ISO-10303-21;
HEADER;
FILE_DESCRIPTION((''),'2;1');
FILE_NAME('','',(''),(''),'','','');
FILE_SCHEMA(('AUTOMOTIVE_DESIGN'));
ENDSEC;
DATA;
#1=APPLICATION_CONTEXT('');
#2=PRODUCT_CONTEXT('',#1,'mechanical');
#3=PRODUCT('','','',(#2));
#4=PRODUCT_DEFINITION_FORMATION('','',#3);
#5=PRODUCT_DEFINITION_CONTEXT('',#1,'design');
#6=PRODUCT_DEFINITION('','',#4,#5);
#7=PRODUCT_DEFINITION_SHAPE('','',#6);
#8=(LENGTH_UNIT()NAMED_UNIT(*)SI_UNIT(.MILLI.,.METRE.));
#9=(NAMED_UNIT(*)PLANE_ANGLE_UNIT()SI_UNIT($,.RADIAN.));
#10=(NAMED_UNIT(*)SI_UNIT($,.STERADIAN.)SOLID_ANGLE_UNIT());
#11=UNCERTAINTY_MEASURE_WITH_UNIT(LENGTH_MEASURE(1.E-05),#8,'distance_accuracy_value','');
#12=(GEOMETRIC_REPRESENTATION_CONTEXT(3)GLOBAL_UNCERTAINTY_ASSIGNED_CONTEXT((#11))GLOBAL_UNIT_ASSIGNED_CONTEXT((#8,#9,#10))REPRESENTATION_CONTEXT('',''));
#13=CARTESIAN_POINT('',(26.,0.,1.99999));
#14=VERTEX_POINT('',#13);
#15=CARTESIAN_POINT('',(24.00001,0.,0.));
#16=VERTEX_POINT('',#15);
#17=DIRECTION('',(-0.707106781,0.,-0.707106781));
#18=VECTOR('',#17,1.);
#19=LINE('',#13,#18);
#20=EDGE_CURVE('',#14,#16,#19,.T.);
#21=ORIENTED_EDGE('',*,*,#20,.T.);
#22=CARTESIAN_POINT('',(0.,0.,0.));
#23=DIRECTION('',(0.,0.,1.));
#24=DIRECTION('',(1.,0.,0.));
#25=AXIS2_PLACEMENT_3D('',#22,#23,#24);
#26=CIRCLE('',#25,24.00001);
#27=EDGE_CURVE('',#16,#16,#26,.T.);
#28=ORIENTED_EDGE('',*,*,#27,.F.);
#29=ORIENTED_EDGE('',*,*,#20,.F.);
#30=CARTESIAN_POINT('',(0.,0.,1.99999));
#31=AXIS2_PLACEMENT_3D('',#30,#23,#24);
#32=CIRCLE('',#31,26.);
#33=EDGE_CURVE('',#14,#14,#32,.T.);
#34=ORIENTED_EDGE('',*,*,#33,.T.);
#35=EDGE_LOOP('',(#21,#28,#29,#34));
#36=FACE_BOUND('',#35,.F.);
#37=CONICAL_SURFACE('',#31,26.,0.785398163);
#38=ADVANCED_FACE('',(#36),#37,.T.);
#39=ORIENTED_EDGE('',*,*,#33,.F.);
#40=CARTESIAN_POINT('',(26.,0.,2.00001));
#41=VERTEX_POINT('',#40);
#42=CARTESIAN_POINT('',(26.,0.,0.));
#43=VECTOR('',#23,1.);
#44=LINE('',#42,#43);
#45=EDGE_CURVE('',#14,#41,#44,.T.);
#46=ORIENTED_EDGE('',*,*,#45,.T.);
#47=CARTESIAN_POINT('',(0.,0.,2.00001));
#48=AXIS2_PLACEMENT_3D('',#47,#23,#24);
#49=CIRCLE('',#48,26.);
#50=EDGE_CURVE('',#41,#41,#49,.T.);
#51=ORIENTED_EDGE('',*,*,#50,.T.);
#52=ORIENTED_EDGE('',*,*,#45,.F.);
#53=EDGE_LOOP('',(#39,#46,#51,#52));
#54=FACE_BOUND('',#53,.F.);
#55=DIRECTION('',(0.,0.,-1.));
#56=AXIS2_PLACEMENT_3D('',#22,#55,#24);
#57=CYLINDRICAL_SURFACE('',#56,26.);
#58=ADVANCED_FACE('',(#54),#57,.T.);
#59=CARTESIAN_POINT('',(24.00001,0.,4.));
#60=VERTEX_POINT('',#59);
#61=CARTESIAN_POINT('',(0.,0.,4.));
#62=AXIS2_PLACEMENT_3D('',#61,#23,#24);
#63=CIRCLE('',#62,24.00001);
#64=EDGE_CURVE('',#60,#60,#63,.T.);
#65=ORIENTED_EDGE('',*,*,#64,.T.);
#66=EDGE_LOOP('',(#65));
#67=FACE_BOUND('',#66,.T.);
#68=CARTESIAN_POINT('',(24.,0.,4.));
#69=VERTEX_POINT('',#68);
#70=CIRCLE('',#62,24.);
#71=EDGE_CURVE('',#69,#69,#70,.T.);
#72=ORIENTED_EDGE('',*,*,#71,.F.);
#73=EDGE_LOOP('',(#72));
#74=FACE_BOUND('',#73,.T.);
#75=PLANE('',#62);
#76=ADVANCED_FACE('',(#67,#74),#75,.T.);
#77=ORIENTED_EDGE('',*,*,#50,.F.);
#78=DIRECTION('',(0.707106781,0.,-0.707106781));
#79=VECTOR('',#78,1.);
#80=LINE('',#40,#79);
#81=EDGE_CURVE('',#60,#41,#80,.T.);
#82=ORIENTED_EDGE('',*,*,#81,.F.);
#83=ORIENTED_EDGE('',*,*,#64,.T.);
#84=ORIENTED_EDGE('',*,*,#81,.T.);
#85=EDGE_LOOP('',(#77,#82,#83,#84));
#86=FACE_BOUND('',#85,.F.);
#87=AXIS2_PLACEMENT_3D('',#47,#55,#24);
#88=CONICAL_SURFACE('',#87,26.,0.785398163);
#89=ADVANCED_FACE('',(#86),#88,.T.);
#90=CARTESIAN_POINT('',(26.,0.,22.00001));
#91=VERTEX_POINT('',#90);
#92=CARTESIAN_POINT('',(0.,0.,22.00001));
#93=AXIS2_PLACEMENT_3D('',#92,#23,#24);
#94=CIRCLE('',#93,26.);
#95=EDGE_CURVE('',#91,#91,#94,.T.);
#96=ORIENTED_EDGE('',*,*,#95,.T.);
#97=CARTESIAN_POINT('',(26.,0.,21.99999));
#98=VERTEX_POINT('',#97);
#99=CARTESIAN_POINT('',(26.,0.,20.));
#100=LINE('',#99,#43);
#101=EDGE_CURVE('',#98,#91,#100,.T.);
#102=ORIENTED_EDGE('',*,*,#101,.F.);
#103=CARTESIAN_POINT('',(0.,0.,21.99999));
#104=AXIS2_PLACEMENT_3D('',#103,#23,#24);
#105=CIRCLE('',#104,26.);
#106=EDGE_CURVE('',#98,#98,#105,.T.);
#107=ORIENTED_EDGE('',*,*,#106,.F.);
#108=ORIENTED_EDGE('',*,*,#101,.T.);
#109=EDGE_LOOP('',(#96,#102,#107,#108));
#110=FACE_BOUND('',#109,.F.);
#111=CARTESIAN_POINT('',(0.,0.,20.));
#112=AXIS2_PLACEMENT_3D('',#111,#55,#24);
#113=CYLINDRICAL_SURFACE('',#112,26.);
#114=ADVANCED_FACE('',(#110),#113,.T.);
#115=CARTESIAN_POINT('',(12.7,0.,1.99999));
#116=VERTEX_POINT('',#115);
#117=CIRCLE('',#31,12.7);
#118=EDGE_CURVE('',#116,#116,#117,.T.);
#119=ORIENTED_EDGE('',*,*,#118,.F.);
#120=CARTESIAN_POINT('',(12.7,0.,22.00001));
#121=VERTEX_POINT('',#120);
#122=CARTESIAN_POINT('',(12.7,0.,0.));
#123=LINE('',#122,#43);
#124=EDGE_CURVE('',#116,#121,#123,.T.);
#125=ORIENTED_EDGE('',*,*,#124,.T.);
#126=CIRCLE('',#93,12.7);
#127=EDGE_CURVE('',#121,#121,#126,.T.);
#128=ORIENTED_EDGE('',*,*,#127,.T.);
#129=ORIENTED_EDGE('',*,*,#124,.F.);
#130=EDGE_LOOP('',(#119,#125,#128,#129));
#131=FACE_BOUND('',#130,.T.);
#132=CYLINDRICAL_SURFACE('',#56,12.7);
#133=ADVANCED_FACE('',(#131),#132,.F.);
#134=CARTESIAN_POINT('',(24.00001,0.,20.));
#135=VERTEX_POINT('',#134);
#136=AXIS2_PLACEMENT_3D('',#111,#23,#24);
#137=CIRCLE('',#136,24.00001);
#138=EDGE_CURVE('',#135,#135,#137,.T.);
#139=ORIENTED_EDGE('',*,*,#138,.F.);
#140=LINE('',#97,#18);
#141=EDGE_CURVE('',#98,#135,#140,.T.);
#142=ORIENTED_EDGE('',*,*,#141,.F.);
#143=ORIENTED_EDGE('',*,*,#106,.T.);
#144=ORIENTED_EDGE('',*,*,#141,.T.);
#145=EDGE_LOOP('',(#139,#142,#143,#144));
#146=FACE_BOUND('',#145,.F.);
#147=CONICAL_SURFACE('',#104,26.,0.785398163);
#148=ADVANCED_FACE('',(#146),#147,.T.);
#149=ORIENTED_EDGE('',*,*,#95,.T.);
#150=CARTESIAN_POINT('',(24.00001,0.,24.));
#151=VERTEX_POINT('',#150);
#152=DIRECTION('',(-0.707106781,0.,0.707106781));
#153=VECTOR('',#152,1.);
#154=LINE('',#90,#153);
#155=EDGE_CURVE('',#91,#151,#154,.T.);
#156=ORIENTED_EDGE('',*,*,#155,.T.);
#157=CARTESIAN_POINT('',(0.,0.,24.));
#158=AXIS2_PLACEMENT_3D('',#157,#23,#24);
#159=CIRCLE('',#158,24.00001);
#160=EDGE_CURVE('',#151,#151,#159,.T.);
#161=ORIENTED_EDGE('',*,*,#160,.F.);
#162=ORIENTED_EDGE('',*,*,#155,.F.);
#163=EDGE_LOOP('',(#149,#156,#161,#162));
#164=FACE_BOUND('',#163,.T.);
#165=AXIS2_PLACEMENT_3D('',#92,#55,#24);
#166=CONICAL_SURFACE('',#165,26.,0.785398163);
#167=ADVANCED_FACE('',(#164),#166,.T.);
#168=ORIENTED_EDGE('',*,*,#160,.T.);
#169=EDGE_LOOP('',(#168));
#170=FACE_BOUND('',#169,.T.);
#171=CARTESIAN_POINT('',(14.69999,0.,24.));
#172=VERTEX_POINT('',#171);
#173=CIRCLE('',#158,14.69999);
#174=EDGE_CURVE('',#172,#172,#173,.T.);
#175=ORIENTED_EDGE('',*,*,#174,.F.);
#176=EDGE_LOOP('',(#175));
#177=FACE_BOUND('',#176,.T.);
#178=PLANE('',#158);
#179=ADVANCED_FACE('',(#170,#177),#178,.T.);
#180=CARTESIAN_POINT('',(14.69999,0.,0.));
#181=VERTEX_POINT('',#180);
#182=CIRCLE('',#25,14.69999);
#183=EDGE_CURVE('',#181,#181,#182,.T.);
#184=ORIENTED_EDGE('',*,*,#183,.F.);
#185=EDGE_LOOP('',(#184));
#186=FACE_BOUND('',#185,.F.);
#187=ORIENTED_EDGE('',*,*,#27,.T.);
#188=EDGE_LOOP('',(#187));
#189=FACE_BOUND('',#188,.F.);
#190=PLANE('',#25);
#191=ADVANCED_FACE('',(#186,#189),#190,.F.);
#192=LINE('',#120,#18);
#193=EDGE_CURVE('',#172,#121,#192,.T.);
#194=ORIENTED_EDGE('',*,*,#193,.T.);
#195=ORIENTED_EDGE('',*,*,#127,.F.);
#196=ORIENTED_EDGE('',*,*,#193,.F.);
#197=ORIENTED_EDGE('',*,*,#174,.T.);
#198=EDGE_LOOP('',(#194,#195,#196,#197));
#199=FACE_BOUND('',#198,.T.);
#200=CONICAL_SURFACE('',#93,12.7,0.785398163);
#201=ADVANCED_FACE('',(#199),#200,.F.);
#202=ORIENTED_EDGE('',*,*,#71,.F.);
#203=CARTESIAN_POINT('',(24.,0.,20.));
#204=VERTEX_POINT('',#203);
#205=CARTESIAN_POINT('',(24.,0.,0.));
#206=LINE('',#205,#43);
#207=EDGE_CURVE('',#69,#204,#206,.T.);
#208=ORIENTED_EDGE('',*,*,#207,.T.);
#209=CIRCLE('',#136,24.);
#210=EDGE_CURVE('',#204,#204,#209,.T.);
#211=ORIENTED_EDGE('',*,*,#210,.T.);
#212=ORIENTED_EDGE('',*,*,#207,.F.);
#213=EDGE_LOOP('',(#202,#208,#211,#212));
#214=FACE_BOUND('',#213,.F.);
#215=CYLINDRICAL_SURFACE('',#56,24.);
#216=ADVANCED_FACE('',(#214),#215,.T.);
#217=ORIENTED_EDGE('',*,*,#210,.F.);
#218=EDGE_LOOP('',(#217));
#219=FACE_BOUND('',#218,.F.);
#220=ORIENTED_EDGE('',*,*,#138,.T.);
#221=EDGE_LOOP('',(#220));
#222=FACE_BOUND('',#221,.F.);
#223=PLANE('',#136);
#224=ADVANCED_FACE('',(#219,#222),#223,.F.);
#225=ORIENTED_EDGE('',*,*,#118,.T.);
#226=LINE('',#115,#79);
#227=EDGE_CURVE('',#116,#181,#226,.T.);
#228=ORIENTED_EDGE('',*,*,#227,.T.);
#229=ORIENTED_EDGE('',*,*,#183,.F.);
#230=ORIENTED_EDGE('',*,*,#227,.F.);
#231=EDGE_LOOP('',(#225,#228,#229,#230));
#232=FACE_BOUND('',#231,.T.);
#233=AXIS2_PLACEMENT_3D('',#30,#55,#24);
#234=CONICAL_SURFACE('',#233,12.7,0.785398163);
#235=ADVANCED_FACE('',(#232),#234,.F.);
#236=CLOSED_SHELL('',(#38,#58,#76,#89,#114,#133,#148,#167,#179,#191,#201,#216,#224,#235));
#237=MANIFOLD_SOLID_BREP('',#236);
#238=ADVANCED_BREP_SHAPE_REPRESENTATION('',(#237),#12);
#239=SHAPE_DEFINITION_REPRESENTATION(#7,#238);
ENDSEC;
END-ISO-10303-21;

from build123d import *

# Parameters (mm, degrees)
F0_R     = 24
F0_R_2   = 12.7
F1_DEPTH = 24
F0_R_3   = 26
F2_DEPTH = 4
F3_START = 20
F3_DEPTH = 4
F4_SIZE  = 1.99999


# Not quite as in the source:
# - a fillet or chamfer is up to 0.001 mm smaller than in the source, because OpenCascade refuses the exact size


with BuildPart() as f1:
    # F0 (on Top) → F1 (new body)
    with BuildSketch(Plane.XY):
        Circle(F0_R)
        Circle(F0_R_2, mode=Mode.SUBTRACT)
    extrude(amount=F1_DEPTH)

    # F0 (on Top) → F2 (join)
    with BuildSketch(Plane.XY):
        Circle(F0_R_3)
        Circle(F0_R, mode=Mode.SUBTRACT)
    extrude(amount=F2_DEPTH)

    # F0 (on Top) → F3 (join)
    with BuildSketch(Plane.XY.offset(F3_START)):
        Circle(F0_R_3)
        Circle(F0_R, mode=Mode.SUBTRACT)
    extrude(amount=F3_DEPTH)

    # F4 (size 2 in the source; OpenCascade refuses exactly that, so slightly less here)
    f4_edges = [f1.edges().sort_by_distance(p)[0] for p in [
        (-26, 0, 20),
        (-26, 0, 24),
        (-26, 0, 4),
        (-26, 0, 0),
        (-12.7, 0, 0),
        (12.7, 0, 12),
        (-12.7, 0, 24),
    ]]
    chamfer(f4_edges, length=F4_SIZE)


solid = f1.part
